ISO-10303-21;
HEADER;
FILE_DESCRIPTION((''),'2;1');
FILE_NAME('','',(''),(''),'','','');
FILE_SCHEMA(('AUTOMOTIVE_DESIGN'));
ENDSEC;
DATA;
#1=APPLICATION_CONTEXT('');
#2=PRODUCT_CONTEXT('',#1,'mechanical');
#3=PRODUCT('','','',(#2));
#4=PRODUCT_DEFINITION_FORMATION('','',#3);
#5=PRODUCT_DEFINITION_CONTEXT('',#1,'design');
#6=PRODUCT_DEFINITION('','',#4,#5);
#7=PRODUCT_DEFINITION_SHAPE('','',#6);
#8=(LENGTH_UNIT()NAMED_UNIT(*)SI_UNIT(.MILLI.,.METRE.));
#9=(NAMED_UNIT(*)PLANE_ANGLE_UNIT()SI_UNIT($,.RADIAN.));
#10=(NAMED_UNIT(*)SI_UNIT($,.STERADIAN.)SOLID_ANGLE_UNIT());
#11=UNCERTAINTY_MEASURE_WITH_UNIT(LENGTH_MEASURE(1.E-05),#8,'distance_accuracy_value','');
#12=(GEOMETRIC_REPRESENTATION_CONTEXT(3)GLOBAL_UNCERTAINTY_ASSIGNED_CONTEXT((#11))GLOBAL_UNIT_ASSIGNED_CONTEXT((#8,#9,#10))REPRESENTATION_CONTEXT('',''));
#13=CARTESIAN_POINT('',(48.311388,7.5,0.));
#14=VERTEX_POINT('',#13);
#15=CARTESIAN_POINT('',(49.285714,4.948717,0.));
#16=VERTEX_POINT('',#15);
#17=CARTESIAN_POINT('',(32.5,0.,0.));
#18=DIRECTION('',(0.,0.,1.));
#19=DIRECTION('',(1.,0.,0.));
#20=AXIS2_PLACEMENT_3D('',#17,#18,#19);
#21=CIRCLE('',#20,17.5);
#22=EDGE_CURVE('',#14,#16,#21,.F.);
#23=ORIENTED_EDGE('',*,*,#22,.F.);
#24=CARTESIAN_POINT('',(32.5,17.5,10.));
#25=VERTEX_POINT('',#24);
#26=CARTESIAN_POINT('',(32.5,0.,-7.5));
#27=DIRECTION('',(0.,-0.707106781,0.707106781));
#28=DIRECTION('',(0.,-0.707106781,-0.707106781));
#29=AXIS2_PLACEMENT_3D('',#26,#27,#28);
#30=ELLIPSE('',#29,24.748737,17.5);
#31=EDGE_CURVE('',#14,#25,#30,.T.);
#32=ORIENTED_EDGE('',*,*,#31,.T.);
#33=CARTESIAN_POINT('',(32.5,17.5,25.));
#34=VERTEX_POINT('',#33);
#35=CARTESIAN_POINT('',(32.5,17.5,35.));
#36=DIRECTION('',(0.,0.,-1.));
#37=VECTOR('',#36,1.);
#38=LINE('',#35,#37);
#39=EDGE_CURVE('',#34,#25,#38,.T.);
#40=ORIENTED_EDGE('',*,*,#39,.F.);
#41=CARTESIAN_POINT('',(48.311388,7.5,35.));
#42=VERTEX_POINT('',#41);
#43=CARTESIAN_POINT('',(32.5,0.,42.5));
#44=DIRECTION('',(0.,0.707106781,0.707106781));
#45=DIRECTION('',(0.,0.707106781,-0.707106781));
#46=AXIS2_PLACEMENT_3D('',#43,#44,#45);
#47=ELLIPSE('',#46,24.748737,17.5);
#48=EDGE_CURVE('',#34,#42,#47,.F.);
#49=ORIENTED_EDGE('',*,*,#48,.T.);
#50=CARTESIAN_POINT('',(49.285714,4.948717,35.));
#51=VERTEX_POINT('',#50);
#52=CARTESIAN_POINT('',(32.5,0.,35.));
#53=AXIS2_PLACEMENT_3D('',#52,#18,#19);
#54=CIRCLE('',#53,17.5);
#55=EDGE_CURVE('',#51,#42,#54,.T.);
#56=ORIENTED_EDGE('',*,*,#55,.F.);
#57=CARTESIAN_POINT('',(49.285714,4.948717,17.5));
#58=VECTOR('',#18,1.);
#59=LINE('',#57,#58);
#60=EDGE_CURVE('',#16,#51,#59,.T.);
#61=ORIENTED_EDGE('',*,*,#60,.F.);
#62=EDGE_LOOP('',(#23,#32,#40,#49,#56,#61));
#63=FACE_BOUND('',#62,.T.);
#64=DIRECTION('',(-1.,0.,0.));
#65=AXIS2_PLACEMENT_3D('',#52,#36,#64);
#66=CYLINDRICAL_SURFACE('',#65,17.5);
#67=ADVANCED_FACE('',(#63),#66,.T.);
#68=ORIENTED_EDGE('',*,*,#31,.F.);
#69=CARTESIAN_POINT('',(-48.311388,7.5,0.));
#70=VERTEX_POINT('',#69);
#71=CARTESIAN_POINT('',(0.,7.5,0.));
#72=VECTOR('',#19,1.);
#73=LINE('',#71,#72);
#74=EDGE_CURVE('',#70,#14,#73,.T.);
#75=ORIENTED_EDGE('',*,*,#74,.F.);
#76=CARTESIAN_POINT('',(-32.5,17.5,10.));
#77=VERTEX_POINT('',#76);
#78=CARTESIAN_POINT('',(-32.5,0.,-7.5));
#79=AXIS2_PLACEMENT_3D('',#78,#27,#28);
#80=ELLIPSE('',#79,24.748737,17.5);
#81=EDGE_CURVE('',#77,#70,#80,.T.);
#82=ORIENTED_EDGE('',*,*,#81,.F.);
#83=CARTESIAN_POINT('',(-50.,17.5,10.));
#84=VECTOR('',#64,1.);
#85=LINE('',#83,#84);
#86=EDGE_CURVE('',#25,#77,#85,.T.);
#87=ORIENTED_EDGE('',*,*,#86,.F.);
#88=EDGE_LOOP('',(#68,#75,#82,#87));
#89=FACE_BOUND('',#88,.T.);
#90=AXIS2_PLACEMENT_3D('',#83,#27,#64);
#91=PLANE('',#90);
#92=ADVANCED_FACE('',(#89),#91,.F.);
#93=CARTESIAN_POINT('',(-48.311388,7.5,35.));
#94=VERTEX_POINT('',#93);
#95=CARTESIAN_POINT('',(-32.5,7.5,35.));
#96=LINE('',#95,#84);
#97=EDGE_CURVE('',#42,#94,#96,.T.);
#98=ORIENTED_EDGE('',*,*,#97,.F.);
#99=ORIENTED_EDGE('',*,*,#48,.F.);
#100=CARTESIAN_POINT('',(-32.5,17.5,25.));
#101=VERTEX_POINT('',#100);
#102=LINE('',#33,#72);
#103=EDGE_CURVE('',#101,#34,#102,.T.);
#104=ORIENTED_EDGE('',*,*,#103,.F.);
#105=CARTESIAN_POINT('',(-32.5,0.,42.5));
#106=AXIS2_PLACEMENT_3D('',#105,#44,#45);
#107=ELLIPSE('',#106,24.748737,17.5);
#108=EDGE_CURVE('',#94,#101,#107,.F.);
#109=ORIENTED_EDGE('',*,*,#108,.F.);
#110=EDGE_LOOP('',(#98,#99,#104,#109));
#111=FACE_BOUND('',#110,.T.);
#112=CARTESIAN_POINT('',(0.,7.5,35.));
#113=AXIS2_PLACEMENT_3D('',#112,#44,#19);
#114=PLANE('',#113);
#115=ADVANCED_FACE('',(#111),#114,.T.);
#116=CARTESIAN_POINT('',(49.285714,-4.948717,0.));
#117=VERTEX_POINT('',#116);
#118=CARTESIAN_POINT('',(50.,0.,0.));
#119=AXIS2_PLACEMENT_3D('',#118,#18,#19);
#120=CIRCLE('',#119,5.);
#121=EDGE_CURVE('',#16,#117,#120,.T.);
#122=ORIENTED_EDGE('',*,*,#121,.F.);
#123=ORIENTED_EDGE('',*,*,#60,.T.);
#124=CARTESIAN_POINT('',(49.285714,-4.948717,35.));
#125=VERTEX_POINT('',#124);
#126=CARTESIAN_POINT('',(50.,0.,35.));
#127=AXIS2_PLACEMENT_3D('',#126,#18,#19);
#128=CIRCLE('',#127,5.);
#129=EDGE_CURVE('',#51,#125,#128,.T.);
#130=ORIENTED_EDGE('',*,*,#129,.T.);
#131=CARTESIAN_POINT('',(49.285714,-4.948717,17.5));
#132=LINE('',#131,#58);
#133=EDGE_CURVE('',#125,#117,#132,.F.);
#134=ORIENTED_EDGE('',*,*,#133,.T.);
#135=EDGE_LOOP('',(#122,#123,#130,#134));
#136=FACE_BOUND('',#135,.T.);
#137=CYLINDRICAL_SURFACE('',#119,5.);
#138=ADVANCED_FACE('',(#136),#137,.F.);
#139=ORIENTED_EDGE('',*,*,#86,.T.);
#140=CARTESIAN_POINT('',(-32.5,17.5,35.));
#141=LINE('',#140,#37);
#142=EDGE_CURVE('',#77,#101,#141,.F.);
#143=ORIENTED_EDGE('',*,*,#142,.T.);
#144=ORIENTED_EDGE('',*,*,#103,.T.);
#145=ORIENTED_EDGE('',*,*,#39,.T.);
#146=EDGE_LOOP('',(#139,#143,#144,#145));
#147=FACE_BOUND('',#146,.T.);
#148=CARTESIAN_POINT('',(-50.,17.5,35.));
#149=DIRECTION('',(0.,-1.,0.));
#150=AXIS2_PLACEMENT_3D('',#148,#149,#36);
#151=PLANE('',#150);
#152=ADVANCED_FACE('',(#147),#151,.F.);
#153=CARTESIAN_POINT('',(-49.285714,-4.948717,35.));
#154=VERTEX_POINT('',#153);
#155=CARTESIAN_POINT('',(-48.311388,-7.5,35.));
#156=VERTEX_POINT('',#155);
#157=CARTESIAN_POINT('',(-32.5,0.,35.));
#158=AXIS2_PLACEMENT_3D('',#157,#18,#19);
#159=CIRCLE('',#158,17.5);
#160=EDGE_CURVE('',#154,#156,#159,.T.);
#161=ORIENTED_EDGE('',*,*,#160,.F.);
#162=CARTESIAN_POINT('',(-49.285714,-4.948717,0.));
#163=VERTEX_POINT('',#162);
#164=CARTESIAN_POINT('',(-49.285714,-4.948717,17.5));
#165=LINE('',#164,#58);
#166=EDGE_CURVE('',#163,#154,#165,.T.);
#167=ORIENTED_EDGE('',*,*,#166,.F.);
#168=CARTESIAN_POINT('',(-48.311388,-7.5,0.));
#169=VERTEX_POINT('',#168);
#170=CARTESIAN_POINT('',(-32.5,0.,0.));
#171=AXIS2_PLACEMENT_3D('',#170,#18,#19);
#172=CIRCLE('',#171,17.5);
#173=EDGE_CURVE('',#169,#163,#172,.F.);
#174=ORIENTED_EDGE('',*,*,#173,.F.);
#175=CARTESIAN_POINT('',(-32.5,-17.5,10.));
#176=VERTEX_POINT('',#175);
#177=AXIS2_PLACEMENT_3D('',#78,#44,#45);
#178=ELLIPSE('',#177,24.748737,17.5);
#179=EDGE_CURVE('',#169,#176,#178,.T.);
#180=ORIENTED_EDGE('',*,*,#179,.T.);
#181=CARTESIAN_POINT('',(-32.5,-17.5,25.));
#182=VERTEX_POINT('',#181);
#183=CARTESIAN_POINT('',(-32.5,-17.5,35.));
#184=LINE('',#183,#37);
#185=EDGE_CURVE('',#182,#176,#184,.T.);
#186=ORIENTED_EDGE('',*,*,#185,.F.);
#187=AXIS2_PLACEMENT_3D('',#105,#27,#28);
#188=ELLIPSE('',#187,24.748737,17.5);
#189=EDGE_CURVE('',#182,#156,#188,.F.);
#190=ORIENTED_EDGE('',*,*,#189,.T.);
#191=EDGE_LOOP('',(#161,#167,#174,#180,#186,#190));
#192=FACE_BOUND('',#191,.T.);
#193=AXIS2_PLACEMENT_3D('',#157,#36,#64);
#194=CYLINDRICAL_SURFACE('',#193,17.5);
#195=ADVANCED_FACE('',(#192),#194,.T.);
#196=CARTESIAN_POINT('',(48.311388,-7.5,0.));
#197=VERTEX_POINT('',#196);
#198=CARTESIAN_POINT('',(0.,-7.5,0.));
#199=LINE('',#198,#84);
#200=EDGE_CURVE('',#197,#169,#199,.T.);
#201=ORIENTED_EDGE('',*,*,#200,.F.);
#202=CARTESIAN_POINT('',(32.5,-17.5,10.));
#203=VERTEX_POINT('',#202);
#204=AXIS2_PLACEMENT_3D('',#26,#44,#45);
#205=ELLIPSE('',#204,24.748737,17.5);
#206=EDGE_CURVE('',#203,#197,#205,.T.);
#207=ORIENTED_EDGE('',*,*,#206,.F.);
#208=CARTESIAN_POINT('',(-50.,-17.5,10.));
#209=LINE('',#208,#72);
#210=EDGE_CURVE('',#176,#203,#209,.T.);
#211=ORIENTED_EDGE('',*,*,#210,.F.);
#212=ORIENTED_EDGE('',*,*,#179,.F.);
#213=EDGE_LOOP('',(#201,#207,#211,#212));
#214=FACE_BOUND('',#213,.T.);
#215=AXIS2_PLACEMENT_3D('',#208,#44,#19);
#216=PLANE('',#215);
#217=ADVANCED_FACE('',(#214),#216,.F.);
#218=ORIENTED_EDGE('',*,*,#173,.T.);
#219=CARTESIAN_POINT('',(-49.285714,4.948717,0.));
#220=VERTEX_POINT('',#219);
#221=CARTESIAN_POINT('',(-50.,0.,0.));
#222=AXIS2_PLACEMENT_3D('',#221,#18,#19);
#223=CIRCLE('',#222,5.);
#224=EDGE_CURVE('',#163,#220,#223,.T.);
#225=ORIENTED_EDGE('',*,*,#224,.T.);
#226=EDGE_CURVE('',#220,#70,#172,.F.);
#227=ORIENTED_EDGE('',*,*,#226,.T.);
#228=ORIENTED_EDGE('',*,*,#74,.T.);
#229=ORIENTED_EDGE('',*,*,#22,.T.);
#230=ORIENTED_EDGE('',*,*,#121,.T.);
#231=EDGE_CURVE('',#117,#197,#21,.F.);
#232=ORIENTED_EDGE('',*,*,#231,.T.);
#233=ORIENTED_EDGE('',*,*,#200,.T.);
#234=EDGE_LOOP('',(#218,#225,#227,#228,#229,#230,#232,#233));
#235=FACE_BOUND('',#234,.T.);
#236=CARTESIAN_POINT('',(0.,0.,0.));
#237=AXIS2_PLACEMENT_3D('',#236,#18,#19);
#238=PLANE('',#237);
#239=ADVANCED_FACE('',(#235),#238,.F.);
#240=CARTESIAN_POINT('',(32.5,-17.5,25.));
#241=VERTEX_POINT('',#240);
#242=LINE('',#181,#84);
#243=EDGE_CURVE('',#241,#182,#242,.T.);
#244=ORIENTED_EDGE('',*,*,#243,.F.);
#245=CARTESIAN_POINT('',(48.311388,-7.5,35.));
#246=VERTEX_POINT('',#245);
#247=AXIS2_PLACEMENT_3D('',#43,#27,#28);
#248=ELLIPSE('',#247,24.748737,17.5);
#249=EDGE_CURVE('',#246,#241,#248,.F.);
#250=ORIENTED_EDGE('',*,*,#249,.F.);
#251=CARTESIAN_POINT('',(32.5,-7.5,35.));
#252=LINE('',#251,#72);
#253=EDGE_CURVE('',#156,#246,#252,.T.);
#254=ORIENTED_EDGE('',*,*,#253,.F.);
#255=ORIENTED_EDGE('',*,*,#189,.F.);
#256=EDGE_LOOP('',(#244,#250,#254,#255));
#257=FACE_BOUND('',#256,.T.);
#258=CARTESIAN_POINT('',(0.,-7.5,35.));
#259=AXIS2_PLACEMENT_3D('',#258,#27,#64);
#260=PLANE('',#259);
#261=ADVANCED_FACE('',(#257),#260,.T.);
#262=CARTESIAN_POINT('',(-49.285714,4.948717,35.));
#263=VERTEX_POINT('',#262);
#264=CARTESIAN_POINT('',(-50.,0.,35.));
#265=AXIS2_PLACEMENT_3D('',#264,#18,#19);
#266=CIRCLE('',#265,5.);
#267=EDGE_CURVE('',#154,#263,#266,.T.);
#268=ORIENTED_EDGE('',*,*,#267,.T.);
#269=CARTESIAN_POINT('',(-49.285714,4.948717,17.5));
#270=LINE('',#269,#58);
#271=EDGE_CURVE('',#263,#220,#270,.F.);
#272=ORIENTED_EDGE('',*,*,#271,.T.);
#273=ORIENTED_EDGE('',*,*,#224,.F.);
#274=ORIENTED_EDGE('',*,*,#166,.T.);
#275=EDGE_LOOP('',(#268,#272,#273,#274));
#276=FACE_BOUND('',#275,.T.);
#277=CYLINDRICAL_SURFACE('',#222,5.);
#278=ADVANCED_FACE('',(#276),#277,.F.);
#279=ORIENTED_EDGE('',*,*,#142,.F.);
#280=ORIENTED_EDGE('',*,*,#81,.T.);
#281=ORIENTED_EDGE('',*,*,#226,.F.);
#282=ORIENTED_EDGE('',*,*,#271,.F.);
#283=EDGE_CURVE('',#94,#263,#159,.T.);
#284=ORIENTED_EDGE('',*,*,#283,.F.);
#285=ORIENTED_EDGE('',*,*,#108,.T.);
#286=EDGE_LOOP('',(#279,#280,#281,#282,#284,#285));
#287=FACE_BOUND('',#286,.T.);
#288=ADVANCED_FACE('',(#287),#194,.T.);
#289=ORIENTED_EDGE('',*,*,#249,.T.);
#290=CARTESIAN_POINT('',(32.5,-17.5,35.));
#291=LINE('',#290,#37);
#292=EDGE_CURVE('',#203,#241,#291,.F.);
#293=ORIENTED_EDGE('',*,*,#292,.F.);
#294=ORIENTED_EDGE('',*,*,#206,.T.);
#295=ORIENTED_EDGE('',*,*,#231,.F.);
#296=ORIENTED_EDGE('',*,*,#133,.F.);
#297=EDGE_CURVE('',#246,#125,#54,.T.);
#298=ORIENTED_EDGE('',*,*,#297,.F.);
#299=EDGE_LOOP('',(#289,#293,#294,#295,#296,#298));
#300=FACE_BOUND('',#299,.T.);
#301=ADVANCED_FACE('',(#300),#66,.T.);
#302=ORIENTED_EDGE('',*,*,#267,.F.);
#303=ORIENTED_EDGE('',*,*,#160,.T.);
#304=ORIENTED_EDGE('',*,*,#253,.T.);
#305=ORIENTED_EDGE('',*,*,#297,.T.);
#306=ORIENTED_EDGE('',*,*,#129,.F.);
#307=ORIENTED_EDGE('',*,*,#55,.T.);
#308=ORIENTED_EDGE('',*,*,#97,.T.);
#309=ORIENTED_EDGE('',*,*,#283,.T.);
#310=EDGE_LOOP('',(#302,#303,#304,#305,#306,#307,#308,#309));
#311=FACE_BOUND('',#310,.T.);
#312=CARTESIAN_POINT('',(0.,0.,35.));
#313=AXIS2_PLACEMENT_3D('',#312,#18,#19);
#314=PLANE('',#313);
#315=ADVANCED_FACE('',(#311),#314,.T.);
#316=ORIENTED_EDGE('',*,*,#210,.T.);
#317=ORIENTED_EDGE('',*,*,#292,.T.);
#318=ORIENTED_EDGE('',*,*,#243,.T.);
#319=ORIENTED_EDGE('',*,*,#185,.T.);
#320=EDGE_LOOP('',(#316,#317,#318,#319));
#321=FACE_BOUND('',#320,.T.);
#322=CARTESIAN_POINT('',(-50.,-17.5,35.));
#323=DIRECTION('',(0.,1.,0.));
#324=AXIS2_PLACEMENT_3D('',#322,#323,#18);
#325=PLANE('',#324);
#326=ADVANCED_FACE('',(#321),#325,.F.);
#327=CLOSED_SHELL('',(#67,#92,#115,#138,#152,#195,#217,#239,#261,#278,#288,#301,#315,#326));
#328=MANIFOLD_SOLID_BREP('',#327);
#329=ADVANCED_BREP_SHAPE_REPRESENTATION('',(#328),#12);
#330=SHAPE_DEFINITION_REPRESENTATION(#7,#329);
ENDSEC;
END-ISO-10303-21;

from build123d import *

# Parameters (mm, degrees)
IZIM1_W                     = 100
IZIM1_H                     = 35
Y_KSEKLIK_EKSTR_ZYON1_DEPTH = 35
RADYUS1_R                   = 17.5
RADYUS2_R                   = 17.5
RADYUS3_R                   = 17.5
IZIM2_R                     = 5
KES_EKSTR_ZYON1_DEPTH       = 64.492125496
PAH2_SIZE                   = 10
PAH3_SIZE                   = 10


# Some blends are built 0.0001 mm under size
with BuildPart() as part:
    # Çizim1 → Yükseklik-Ekstrüzyon1 (new body)
    with BuildSketch(Plane.XY):
        Rectangle(IZIM1_W, IZIM1_H)
    extrude(amount=Y_KSEKLIK_EKSTR_ZYON1_DEPTH)

    # Radyus1
    radyus1_edges = [part.edges().sort_by_distance(p)[0] for p in [
        (-50, 17.5, 17.5),
    ]]
    fillet(radyus1_edges, radius=RADYUS1_R)

    # Radyus2
    radyus2_edges = [part.edges().sort_by_distance(p)[0] for p in [
        (-50, -17.5, 17.5),
    ]]
    fillet(radyus2_edges, radius=RADYUS2_R - 0.0001)  # a hair under: the kernel refuses the full size

    # Radyus3
    radyus3_edges = [part.edges().sort_by_distance(p)[0] for p in [
        (50, -17.5, 17.5),
        (50, 17.5, 17.5),
    ]]
    fillet(radyus3_edges, radius=RADYUS3_R - 0.0001)  # a hair under: the kernel refuses the full size

    # Çizim2 → Kes-Ekstrüzyon1 (cut, through all)
    with BuildSketch(Plane.XY.offset(35)):
        with Locations((-50, 0)):
            Circle(IZIM2_R)
        with Locations((50, 0)):
            Circle(IZIM2_R)
    extrude(amount=-KES_EKSTR_ZYON1_DEPTH, mode=Mode.SUBTRACT)

    # Pah2
    # the kernel refuses this chamfer: 10 mm, written as the material it takes off along each edge
    with BuildSketch(Plane(origin=(-58.21682988, 17.5, 0), x_dir=(0, -0.9996219169112968, -0.027495876610586372), z_dir=(1, 0, 0))) as pah2_piece_1:
        Polygon((PAH2_SIZE * 0.999621916911, -PAH2_SIZE * 0.0274958766106), (-PAH2_SIZE * 0.0274958766106, -PAH2_SIZE * 0.999621916911), (0, 0), align=None)
    extrude(amount=116.433759759, mode=Mode.SUBTRACT)

    # Pah3
    # the kernel refuses this chamfer: 10 mm, written as the material it takes off along each edge
    with BuildSketch(Plane(origin=(58.21692988, -17.5, 0), x_dir=(0, 0.9996219169112968, -0.027495876610586372), z_dir=(-1, 0, 0)), Plane(origin=(58.21692988, -17.5, 35), x_dir=(0, -0.027495876610586317, -0.9996219169112968), z_dir=(-1, 0, 0))) as pah3_piece_1:
        Polygon((PAH3_SIZE * 0.999621916911, -PAH3_SIZE * 0.0274958766106), (-PAH3_SIZE * 0.0274958766106, -PAH3_SIZE * 0.999621916911), (0, 0), align=None)
    extrude(amount=116.433859759, mode=Mode.SUBTRACT)
    with BuildSketch(Plane(origin=(-58.21682988, 17.5, 35), x_dir=(0, -0.9996219169112968, 0.027495876610586317), z_dir=(1, 0, 0))) as pah3_piece_2:
        Polygon((PAH3_SIZE * 0.999621916911, PAH3_SIZE * 0.0274958766106), (-PAH3_SIZE * 0.0274958766106, PAH3_SIZE * 0.999621916911), (0, 0), align=None)
    extrude(amount=116.433759759, mode=Mode.SUBTRACT)


solid = part.part
